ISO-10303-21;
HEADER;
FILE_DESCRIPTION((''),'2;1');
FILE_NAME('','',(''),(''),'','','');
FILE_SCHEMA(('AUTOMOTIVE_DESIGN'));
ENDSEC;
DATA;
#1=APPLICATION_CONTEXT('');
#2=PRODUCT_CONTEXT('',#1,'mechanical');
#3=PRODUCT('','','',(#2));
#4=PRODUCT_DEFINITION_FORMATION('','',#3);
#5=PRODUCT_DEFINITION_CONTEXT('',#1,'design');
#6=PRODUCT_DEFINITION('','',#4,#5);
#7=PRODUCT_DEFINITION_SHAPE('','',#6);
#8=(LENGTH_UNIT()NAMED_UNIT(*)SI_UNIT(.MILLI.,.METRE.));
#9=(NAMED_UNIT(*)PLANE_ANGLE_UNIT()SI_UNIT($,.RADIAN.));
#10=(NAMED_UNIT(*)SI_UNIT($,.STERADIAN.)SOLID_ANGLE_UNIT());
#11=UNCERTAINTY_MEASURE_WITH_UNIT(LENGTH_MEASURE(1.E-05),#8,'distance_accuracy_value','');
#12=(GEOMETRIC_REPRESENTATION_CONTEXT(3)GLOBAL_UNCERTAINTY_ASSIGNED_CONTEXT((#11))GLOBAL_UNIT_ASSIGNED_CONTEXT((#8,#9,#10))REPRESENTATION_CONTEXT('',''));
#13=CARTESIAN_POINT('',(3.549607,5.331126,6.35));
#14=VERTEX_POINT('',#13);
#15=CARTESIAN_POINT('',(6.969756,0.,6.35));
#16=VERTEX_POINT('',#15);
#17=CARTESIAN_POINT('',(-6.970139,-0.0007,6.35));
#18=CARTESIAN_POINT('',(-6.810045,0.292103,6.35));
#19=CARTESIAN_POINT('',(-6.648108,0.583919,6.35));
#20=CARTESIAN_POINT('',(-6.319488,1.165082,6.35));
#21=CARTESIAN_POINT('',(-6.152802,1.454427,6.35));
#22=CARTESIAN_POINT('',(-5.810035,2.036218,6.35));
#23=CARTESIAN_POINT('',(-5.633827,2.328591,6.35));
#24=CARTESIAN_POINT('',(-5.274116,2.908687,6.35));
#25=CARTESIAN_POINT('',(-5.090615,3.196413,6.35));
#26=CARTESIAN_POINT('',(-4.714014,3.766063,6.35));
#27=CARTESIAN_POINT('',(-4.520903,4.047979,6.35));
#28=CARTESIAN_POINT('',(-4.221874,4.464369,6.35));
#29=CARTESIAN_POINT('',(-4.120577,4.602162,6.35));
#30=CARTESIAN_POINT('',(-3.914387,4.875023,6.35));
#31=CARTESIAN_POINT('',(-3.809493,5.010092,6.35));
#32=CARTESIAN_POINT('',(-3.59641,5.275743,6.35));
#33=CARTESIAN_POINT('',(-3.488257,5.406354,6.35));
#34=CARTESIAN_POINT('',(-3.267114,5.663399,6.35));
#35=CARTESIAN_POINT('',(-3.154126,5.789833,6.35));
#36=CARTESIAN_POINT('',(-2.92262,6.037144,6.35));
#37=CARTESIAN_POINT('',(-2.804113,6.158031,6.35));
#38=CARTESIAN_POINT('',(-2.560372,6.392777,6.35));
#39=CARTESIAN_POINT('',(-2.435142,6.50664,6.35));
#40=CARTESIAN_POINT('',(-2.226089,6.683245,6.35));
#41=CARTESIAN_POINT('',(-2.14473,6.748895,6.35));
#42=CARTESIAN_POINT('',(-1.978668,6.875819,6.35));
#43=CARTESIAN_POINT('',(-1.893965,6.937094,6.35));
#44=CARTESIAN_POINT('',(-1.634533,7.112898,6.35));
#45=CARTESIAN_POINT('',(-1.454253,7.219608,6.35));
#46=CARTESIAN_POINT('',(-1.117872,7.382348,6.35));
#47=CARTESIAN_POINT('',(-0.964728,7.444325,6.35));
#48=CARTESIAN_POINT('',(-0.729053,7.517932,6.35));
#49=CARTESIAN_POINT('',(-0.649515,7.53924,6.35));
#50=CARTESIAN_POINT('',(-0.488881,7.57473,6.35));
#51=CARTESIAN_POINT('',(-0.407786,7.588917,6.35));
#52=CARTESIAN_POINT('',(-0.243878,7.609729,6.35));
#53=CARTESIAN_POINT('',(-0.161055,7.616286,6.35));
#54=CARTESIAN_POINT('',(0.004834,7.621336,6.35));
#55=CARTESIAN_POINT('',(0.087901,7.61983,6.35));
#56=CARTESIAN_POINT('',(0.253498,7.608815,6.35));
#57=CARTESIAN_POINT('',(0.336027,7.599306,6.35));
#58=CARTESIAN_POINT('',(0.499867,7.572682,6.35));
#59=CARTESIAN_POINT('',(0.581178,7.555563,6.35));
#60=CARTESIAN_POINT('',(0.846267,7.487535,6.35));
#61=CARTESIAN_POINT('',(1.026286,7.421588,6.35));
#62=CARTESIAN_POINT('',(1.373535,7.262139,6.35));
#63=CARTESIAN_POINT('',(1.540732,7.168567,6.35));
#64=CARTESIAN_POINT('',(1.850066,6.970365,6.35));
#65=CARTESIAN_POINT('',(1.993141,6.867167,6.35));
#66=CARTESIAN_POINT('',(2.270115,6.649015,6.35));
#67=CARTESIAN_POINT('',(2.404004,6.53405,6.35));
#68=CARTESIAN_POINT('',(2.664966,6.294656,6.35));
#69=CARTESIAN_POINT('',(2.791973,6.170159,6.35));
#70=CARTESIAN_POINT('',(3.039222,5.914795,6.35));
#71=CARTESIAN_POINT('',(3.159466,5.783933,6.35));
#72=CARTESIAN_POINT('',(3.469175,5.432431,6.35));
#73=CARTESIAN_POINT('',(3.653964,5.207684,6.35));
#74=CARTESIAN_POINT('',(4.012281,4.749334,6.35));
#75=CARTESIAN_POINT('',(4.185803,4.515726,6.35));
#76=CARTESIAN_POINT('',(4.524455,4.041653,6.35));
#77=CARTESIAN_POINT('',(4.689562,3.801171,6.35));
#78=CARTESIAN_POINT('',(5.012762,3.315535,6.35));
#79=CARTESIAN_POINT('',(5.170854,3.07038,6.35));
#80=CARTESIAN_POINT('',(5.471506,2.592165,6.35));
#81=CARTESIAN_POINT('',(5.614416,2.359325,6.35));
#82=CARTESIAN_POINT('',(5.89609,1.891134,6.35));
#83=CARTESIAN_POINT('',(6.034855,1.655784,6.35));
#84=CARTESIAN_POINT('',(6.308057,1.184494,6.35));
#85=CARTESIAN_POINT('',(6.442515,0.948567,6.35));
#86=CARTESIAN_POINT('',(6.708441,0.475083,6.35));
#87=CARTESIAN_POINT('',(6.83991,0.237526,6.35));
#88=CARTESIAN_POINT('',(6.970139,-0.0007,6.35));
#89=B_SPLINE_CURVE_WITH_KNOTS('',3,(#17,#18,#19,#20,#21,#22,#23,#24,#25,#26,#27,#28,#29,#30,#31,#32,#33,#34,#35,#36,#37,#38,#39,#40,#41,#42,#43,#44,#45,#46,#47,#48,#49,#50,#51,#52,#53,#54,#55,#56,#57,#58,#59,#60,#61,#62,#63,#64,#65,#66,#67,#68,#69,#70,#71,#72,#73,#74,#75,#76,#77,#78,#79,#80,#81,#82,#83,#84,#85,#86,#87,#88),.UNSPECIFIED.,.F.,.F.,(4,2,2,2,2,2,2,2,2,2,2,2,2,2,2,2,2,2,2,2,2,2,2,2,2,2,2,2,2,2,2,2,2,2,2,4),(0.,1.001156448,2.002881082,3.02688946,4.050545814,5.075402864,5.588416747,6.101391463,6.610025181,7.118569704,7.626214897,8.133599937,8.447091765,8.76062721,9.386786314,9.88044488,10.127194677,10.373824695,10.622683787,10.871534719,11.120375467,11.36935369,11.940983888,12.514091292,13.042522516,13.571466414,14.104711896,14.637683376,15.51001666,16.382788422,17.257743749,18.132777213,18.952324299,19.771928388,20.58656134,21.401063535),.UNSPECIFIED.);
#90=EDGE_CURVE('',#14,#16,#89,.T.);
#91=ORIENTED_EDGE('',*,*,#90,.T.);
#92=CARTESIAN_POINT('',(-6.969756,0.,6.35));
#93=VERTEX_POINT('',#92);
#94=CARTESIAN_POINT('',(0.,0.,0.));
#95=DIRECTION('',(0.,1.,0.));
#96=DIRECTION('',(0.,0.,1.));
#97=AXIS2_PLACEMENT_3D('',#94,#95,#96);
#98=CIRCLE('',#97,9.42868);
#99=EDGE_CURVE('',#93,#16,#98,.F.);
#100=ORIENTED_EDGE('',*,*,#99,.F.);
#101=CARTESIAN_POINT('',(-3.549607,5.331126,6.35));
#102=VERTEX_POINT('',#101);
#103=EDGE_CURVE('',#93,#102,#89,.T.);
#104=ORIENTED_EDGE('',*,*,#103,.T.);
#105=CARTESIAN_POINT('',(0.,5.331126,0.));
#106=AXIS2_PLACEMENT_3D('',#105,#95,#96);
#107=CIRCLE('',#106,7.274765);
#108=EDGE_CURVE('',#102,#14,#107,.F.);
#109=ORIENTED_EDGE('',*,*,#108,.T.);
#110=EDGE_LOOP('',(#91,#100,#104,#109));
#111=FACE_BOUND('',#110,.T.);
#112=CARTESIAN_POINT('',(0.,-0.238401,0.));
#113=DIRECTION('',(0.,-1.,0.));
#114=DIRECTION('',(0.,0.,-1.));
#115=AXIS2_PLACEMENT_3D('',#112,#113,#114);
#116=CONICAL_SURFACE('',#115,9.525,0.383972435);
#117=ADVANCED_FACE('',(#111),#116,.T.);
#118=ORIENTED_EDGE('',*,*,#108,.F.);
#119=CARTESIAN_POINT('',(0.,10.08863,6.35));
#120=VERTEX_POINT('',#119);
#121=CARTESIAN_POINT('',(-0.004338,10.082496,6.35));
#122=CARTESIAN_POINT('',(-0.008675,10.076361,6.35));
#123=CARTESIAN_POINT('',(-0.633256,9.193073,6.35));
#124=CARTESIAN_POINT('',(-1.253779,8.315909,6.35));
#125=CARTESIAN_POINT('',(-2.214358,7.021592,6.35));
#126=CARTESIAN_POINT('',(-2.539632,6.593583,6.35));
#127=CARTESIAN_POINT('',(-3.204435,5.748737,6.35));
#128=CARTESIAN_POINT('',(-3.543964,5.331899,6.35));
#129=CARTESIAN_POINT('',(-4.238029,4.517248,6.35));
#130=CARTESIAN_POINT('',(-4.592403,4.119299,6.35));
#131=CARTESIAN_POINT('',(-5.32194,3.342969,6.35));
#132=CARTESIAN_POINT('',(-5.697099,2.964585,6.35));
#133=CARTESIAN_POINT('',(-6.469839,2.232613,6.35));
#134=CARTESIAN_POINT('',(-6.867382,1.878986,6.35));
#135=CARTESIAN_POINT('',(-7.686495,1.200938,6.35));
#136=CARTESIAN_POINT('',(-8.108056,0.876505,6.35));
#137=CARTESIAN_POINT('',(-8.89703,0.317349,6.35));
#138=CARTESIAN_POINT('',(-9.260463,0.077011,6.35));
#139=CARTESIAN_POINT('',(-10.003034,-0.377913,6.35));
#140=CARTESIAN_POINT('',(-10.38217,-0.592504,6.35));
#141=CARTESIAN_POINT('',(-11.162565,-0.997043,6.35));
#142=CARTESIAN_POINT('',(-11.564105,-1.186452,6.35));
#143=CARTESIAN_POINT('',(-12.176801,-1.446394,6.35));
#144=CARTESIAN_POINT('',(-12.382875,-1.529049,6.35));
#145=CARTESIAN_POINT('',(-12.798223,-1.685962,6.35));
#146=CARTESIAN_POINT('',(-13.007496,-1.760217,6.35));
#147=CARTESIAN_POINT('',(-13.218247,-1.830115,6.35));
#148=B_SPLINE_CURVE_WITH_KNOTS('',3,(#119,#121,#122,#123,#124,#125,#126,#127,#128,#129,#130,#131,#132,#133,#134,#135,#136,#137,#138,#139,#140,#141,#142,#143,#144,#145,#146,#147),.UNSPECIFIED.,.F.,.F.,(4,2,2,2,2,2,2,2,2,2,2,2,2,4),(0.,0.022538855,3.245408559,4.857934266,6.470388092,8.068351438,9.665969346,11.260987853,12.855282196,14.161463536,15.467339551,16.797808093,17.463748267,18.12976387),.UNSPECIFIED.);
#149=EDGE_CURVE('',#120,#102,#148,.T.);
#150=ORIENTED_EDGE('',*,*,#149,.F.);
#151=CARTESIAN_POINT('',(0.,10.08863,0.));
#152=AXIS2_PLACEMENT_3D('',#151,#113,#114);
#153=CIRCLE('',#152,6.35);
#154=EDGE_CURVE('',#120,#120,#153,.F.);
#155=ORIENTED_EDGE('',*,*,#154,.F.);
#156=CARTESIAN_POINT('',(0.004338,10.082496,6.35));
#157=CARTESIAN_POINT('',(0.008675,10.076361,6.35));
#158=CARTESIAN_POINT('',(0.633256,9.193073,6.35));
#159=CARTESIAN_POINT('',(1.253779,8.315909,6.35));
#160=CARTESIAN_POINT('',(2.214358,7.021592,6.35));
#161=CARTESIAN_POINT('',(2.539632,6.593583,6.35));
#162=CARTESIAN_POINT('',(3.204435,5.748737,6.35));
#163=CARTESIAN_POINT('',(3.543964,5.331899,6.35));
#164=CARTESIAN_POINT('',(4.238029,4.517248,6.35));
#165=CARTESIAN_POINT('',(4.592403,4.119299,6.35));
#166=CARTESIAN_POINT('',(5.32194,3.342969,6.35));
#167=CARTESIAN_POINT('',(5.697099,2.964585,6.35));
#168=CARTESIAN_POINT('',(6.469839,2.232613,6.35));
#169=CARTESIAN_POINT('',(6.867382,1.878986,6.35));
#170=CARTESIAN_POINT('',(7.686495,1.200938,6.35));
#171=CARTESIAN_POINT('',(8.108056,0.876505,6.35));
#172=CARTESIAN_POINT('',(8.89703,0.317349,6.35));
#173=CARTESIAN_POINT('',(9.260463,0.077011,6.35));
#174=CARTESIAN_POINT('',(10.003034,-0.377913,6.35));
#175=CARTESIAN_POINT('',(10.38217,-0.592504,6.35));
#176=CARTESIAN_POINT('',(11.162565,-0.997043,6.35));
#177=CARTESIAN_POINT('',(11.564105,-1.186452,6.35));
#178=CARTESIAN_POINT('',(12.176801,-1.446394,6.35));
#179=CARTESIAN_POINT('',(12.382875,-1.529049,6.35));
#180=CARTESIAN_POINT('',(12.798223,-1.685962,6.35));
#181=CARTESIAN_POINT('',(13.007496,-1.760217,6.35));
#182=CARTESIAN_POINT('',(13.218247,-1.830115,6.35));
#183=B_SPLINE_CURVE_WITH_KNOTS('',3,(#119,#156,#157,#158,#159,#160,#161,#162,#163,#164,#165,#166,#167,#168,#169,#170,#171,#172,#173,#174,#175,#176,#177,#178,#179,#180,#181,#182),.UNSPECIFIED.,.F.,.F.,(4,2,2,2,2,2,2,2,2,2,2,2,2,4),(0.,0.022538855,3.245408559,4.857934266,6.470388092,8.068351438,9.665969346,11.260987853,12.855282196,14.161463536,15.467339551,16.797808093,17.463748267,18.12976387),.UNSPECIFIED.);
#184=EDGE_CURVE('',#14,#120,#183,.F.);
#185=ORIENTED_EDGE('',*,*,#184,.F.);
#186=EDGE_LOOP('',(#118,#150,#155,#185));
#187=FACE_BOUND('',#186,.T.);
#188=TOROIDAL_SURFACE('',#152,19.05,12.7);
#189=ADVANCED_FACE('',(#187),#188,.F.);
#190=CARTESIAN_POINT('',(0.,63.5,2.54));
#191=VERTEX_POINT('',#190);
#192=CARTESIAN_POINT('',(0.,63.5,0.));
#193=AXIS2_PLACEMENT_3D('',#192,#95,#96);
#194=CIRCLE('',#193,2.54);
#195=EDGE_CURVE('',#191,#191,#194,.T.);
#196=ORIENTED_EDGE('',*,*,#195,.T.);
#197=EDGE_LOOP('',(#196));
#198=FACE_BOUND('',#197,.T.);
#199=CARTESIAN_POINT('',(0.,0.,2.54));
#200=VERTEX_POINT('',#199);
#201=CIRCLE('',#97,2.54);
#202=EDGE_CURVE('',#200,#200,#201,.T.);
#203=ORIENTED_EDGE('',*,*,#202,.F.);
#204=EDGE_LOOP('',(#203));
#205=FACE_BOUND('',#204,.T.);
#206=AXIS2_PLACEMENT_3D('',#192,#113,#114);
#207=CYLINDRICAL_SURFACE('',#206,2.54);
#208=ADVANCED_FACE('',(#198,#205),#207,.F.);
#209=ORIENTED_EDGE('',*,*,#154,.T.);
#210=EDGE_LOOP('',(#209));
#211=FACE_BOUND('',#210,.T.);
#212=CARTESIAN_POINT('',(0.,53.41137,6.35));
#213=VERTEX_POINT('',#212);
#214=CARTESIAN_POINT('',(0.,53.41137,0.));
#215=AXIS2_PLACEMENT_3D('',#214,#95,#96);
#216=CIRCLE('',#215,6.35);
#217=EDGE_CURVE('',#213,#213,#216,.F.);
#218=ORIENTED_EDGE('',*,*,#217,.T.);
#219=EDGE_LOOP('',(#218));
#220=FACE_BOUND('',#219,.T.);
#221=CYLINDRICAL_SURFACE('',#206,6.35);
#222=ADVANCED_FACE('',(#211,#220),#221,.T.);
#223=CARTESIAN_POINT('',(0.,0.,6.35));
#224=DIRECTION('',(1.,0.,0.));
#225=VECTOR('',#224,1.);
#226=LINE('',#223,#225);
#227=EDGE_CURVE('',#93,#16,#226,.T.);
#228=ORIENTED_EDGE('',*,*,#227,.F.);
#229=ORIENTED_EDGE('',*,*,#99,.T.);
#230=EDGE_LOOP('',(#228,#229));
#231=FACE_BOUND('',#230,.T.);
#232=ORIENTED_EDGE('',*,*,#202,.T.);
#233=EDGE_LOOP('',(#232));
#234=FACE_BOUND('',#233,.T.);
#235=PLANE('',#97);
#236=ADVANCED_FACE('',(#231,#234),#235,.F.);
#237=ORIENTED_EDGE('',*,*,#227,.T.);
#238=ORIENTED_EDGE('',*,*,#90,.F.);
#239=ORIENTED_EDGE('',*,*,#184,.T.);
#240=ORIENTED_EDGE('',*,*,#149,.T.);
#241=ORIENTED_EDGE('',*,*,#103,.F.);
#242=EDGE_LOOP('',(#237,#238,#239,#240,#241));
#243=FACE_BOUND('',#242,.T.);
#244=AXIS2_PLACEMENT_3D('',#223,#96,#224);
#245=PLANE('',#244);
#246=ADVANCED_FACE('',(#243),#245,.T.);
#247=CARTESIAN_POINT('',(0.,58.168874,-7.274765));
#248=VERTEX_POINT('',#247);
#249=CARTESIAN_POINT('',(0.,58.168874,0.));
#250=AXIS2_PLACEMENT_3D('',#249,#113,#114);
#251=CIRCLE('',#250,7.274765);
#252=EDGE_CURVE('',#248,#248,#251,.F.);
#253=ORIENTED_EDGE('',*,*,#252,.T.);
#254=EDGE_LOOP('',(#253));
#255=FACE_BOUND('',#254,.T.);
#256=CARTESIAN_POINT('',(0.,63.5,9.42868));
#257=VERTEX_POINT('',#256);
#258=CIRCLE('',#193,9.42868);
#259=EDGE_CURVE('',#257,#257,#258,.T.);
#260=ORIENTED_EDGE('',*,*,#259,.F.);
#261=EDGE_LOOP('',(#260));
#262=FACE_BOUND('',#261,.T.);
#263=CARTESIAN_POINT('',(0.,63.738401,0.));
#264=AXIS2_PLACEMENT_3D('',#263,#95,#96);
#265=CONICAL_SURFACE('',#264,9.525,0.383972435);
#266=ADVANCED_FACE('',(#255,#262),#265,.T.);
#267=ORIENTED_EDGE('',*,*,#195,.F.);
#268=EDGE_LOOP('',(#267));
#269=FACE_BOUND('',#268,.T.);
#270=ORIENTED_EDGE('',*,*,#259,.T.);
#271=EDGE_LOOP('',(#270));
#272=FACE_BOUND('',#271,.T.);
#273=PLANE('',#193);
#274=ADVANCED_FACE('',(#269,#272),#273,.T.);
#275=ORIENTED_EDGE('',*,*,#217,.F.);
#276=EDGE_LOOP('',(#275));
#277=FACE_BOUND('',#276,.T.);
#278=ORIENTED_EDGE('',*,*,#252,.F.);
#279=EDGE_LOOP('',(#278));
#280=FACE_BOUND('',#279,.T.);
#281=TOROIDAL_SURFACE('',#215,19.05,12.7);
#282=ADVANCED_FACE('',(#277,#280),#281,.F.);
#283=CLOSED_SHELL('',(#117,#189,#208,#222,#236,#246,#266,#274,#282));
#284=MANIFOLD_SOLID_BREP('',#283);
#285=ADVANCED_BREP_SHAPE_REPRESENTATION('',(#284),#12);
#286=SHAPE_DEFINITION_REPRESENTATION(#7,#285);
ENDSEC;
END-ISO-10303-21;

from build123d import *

# Parameters (mm, degrees)
SKETCH1_R           = 6.35
SKETCH1_R_2         = 2.54
BOSS_EXTRUDE1_DEPTH = 63.5
SKETCH2_R           = 9.525
SKETCH2_R_2         = 2.54
BOSS_EXTRUDE2_DEPTH = 7.62
CHAMFER1_SIZE       = 7.85840076
CHAMFER1_SIZE_2     = 3.175
FILLET1_R           = 12.7
BOSS_EXTRUDE3_START = -7.62
SKETCH3_R           = 9.525
SKETCH3_R_2         = 2.54
BOSS_EXTRUDE3_DEPTH = 7.62
CHAMFER2_SIZE       = 3.175
CHAMFER2_SIZE_2     = 7.85840076
FILLET2_R           = 12.7
CUT_EXTRUDE1_START  = 6.35
SKETCH4_W           = 29.198575266
SKETCH4_H           = 42.680388974
CUT_EXTRUDE1_DEPTH  = 59.53489827


with BuildPart() as part:
    # Sketch1 → Boss-Extrude1 (new body)
    with BuildSketch(Plane(origin=(0, 0, 0), x_dir=(1, 0, 0), z_dir=(0, 1, 0))):
        with Locations(Location((0, 0, 0), (0, 0, 270))):
            Circle(SKETCH1_R)
        with Locations(Location((0, 0, 0), (0, 0, 270))):
            Circle(SKETCH1_R_2, mode=Mode.SUBTRACT)
    extrude(amount=BOSS_EXTRUDE1_DEPTH)

    # Sketch2 → Boss-Extrude2 (add)
    with BuildSketch(Plane(origin=(0, 0, 0), x_dir=(-1, 0, 0), z_dir=(0, -1, 0))):
        with Locations(Location((0, 0, 0), (0, 0, 90))):
            Circle(SKETCH2_R)
        with Locations(Location((0, 0, 0), (0, 0, 270))):
            Circle(SKETCH2_R_2, mode=Mode.SUBTRACT)
    extrude(amount=-BOSS_EXTRUDE2_DEPTH)

    # Chamfer1
    # the kernel refuses this chamfer: 7.85840076, 3.175 mm, written as the material it takes off along each edge
    with BuildSketch(Plane(origin=(0, 7.62, 0), x_dir=(0, 0, -1), z_dir=(-1, 0, 0))) as chamfer1_piece_1:
        Polygon((9.525, CHAMFER1_SIZE), (9.525 - CHAMFER1_SIZE_2, 0), (9.525, 0), align=None)
    revolve(axis=Axis((0, 7.62, 0), (0, -1, 0)), mode=Mode.SUBTRACT)

    # Fillet1
    fillet1_edges = [part.edges().sort_by_distance(p)[0] for p in [
        (6.35, 7.62, 0),
    ]]
    fillet(fillet1_edges, radius=FILLET1_R)

    # Sketch3 → Boss-Extrude3 (add)
    with BuildSketch(Plane(origin=(0, 63.5, 0), x_dir=(1, 0, 0), z_dir=(0, 1, 0)).offset(BOSS_EXTRUDE3_START)):
        with Locations(Location((0, 0, 0), (0, 0, 270))):
            Circle(SKETCH3_R)
        with Locations(Location((0, 0, 0), (0, 0, 270))):
            Circle(SKETCH3_R_2, mode=Mode.SUBTRACT)
    extrude(amount=BOSS_EXTRUDE3_DEPTH)

    # Chamfer2
    # the kernel refuses this chamfer: 7.85840076, 3.175 mm, written as the material it takes off along each edge
    with BuildSketch(Plane(origin=(0, 55.88, 0), x_dir=(0, 0, 1), z_dir=(-1, 0, 0))) as chamfer2_piece_1_section:
        Polygon((9.525 - CHAMFER2_SIZE, 0), (9.525, CHAMFER2_SIZE_2), (9.525, 0), align=None)
    chamfer2_piece_1 = revolve(axis=Axis((0, 55.88, 0), (0, 1, 0)), mode=Mode.PRIVATE)
    chamfer2_piece_1 = chamfer2_piece_1 - Plane(origin=(0, 59.920436712, 0), x_dir=(0, 0, 1), z_dir=(0, -1, 0)) * Cylinder(6.35, 39, mode=Mode.PRIVATE)
    add(chamfer2_piece_1, mode=Mode.SUBTRACT)

    # Fillet2
    fillet2_edges = [part.edges().sort_by_distance(p)[0] for p in [
        (0, 55.88, -6.35),
    ]]
    fillet(fillet2_edges, radius=FILLET2_R)

    # Sketch4 → Cut-Extrude1 (cut, through all)
    with BuildSketch(Plane.XY.offset(CUT_EXTRUDE1_START)):
        with Locations((0, 16.627867716)):
            Rectangle(SKETCH4_W, SKETCH4_H)
    extrude(amount=CUT_EXTRUDE1_DEPTH, mode=Mode.SUBTRACT)


solid = part.part
